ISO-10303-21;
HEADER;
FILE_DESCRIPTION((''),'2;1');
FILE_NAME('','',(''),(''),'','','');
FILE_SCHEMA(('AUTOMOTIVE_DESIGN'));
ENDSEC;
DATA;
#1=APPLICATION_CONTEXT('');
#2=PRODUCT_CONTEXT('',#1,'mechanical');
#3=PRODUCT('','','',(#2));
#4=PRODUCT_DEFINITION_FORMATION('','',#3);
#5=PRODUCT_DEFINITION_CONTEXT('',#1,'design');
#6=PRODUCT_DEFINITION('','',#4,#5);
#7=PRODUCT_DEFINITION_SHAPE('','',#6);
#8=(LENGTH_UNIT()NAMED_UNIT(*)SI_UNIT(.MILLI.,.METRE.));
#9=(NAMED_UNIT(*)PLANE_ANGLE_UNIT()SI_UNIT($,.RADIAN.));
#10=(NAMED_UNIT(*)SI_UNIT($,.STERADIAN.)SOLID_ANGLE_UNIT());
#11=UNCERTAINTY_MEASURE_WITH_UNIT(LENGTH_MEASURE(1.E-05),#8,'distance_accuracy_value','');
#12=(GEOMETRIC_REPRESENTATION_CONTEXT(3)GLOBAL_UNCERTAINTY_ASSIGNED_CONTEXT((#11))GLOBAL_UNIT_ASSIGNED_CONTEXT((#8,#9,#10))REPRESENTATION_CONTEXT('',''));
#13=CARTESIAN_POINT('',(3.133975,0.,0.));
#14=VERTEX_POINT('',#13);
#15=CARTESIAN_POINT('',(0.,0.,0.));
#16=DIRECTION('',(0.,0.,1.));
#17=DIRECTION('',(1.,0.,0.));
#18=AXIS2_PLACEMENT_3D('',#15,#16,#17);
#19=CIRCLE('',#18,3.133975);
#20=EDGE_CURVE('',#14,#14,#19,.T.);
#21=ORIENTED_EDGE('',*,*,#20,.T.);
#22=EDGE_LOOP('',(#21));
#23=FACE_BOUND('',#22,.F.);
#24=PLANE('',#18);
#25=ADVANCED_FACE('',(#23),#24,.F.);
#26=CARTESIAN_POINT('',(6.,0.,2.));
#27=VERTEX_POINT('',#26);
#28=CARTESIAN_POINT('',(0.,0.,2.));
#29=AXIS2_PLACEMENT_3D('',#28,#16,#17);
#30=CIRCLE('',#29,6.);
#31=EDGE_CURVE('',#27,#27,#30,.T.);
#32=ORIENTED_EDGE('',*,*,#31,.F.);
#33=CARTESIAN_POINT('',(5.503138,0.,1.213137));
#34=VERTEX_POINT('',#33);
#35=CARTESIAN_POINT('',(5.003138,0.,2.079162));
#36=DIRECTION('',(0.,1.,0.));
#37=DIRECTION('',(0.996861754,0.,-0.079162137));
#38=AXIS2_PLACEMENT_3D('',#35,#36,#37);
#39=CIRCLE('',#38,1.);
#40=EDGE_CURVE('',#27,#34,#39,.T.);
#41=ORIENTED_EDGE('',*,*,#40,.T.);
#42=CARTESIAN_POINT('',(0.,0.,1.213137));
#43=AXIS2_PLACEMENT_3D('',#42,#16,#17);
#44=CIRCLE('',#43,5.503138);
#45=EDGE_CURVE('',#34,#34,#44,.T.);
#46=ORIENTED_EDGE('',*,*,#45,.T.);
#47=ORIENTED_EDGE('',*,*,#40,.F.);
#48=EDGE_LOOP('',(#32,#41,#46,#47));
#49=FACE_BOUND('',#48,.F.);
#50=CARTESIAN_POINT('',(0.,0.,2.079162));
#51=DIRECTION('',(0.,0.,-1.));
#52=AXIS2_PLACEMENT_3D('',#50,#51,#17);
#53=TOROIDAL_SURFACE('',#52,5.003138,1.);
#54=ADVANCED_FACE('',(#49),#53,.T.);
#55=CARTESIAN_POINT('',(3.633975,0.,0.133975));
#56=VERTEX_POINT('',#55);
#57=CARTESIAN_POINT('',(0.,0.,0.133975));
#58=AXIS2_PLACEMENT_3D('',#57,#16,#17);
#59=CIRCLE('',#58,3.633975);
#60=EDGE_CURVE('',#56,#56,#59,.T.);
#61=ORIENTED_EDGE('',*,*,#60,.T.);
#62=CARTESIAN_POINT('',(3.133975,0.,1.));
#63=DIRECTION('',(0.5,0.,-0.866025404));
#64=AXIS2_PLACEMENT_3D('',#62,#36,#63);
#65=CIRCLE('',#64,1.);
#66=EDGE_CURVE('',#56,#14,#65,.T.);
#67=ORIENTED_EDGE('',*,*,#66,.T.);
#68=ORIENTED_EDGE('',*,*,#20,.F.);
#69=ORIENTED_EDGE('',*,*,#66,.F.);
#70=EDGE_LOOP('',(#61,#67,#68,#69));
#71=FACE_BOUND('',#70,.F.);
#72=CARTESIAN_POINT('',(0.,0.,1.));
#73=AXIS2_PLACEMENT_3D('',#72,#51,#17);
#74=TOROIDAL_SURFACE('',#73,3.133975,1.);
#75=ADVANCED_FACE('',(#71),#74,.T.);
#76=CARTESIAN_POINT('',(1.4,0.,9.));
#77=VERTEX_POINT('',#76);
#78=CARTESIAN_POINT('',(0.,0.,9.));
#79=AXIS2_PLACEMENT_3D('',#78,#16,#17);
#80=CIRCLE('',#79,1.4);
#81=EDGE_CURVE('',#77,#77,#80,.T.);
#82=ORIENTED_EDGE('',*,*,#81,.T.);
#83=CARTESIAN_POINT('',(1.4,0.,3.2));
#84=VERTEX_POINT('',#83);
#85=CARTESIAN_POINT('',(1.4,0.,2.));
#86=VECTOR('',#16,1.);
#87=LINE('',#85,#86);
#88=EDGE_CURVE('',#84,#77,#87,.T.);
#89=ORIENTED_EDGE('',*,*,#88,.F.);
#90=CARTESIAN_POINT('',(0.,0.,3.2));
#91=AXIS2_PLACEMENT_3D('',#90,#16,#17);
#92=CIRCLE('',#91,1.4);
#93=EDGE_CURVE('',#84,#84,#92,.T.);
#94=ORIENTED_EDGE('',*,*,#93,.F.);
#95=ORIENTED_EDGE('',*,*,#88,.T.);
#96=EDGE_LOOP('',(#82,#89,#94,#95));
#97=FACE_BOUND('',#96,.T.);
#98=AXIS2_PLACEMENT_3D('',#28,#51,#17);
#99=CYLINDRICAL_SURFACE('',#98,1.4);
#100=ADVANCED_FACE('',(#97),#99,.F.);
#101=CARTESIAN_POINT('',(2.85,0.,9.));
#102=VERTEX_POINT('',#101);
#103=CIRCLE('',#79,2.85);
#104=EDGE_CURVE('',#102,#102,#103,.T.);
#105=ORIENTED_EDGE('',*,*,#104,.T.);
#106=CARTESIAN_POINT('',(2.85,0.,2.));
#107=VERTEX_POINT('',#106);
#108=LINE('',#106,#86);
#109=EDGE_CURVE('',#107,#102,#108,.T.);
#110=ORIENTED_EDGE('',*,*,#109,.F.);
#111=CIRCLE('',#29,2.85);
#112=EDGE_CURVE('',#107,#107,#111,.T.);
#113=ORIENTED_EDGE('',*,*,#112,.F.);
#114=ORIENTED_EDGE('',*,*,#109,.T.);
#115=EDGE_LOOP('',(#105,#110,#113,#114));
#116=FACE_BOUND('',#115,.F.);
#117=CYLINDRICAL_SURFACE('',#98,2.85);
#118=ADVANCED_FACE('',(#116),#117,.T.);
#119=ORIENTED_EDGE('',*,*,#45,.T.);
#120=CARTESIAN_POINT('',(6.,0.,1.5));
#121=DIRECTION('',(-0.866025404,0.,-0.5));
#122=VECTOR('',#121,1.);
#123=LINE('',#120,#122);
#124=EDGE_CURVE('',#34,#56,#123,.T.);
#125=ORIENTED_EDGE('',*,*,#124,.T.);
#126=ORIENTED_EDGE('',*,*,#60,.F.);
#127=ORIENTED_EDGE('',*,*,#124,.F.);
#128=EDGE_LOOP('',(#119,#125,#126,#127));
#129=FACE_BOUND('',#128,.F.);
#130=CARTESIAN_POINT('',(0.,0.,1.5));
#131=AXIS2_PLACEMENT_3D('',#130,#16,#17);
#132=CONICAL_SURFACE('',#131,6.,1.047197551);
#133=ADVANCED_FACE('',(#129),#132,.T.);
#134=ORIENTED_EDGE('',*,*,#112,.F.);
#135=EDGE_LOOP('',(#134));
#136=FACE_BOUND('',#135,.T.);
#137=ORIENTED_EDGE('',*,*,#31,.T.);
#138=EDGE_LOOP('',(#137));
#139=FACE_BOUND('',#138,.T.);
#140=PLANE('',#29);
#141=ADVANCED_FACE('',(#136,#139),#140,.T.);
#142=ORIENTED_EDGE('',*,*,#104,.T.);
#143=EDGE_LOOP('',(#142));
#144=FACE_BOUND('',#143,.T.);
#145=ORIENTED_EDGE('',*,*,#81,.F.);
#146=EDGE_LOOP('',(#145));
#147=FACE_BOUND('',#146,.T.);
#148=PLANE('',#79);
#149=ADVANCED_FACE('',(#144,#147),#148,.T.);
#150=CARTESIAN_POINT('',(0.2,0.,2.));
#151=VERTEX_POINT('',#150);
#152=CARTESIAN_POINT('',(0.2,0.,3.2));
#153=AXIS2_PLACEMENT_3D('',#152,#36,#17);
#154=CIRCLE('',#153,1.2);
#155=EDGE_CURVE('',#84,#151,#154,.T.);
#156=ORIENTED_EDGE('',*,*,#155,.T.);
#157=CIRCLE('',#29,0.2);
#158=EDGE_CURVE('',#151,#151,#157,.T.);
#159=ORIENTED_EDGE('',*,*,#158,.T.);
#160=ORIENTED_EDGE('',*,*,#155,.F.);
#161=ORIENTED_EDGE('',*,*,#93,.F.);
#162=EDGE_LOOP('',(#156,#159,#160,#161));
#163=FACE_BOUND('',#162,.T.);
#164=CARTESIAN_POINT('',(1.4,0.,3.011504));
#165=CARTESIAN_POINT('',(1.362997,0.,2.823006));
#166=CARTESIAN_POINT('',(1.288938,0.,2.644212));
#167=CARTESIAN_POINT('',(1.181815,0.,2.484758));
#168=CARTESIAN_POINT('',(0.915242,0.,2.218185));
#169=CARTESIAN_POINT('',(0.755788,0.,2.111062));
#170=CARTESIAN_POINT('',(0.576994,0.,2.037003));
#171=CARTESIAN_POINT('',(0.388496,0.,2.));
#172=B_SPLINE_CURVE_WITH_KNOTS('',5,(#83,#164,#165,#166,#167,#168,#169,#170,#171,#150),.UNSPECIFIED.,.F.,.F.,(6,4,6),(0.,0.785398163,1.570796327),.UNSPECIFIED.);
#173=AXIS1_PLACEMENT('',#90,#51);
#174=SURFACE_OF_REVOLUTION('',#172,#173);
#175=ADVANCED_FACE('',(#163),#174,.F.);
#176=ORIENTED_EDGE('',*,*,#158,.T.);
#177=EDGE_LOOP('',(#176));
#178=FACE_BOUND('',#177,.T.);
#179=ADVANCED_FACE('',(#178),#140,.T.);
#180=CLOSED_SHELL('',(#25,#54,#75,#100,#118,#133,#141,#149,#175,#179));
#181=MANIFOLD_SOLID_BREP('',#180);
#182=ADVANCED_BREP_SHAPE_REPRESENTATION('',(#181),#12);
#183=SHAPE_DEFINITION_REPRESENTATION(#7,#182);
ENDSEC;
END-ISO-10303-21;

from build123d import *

# Parameters (mm, degrees)
F0_R     = 6
F1_DEPTH = 2
F2_SIZE2 = 2.5980762114
F2_SIZE  = 1.5
F4_R     = 2.85
F4_R_2   = 1.4
F5_DEPTH = 7
F6_R     = 1.2


# Not quite as in the source:
# - a fillet or chamfer that OpenCascade refuses, or shapes differently, is made with other operations: its cross-section is extruded or revolved along the edge and cut away or added


with BuildPart() as f1:
    # F0 (on Top) → F1 (new body)
    with BuildSketch(Plane.XY):
        Circle(F0_R)
    extrude(amount=F1_DEPTH)

    # F2
    f2_edges = [f1.edges().sort_by_distance(p)[0] for p in [
        (-6, 0, 0),
    ]]
    f2_side = f1.faces().sort_by_distance((-6, 0, 1))[0]
    chamfer(f2_edges, length=F2_SIZE, length2=F2_SIZE2, reference=f2_side)

    # F3: fillet of radius 1 on 2 edges, made by hand

    # F3_s1 → F3_t2 (revolve, cut)
    with BuildSketch(Plane.XZ):
        with BuildLine():
            ThreePointArc((3.6339745962, 0.1339745962), (3.3927936413, 0.0340741737), (3.1339745962, 0))
            Line((3.1339745962, 0), (3.4019237886, 0))
            Line((3.4019237886, 0), (3.6339745962, 0.1339745962))
        make_face()
    revolve(axis=Axis((0, 0, 0), (0, 0, 1)), mode=Mode.SUBTRACT)

    # F3_s3 → F3_t4 (revolve, cut)
    with BuildSketch(Plane.XZ):
        with BuildLine():
            ThreePointArc((6, 2), (5.8486778537, 1.5452494356), (5.5031382462, 1.2131367327))
            Line((5.5031382462, 1.2131367327), (6, 1.5))
            Line((6, 1.5), (6, 2))
        make_face()
    revolve(axis=Axis((0, 0, 1.5), (0, 0, 1)), mode=Mode.SUBTRACT)

    # F4 (on face) → F5 (join)
    with BuildSketch(Plane.XY.offset(2)):
        Circle(F4_R)
        Circle(F4_R_2, mode=Mode.SUBTRACT)
    extrude(amount=F5_DEPTH)

    # F6
    f6_edges = [f1.edges().sort_by_distance(p)[0] for p in [
        (-1.4, 0, 2),
    ]]
    fillet(f6_edges, radius=F6_R)


solid = f1.part
